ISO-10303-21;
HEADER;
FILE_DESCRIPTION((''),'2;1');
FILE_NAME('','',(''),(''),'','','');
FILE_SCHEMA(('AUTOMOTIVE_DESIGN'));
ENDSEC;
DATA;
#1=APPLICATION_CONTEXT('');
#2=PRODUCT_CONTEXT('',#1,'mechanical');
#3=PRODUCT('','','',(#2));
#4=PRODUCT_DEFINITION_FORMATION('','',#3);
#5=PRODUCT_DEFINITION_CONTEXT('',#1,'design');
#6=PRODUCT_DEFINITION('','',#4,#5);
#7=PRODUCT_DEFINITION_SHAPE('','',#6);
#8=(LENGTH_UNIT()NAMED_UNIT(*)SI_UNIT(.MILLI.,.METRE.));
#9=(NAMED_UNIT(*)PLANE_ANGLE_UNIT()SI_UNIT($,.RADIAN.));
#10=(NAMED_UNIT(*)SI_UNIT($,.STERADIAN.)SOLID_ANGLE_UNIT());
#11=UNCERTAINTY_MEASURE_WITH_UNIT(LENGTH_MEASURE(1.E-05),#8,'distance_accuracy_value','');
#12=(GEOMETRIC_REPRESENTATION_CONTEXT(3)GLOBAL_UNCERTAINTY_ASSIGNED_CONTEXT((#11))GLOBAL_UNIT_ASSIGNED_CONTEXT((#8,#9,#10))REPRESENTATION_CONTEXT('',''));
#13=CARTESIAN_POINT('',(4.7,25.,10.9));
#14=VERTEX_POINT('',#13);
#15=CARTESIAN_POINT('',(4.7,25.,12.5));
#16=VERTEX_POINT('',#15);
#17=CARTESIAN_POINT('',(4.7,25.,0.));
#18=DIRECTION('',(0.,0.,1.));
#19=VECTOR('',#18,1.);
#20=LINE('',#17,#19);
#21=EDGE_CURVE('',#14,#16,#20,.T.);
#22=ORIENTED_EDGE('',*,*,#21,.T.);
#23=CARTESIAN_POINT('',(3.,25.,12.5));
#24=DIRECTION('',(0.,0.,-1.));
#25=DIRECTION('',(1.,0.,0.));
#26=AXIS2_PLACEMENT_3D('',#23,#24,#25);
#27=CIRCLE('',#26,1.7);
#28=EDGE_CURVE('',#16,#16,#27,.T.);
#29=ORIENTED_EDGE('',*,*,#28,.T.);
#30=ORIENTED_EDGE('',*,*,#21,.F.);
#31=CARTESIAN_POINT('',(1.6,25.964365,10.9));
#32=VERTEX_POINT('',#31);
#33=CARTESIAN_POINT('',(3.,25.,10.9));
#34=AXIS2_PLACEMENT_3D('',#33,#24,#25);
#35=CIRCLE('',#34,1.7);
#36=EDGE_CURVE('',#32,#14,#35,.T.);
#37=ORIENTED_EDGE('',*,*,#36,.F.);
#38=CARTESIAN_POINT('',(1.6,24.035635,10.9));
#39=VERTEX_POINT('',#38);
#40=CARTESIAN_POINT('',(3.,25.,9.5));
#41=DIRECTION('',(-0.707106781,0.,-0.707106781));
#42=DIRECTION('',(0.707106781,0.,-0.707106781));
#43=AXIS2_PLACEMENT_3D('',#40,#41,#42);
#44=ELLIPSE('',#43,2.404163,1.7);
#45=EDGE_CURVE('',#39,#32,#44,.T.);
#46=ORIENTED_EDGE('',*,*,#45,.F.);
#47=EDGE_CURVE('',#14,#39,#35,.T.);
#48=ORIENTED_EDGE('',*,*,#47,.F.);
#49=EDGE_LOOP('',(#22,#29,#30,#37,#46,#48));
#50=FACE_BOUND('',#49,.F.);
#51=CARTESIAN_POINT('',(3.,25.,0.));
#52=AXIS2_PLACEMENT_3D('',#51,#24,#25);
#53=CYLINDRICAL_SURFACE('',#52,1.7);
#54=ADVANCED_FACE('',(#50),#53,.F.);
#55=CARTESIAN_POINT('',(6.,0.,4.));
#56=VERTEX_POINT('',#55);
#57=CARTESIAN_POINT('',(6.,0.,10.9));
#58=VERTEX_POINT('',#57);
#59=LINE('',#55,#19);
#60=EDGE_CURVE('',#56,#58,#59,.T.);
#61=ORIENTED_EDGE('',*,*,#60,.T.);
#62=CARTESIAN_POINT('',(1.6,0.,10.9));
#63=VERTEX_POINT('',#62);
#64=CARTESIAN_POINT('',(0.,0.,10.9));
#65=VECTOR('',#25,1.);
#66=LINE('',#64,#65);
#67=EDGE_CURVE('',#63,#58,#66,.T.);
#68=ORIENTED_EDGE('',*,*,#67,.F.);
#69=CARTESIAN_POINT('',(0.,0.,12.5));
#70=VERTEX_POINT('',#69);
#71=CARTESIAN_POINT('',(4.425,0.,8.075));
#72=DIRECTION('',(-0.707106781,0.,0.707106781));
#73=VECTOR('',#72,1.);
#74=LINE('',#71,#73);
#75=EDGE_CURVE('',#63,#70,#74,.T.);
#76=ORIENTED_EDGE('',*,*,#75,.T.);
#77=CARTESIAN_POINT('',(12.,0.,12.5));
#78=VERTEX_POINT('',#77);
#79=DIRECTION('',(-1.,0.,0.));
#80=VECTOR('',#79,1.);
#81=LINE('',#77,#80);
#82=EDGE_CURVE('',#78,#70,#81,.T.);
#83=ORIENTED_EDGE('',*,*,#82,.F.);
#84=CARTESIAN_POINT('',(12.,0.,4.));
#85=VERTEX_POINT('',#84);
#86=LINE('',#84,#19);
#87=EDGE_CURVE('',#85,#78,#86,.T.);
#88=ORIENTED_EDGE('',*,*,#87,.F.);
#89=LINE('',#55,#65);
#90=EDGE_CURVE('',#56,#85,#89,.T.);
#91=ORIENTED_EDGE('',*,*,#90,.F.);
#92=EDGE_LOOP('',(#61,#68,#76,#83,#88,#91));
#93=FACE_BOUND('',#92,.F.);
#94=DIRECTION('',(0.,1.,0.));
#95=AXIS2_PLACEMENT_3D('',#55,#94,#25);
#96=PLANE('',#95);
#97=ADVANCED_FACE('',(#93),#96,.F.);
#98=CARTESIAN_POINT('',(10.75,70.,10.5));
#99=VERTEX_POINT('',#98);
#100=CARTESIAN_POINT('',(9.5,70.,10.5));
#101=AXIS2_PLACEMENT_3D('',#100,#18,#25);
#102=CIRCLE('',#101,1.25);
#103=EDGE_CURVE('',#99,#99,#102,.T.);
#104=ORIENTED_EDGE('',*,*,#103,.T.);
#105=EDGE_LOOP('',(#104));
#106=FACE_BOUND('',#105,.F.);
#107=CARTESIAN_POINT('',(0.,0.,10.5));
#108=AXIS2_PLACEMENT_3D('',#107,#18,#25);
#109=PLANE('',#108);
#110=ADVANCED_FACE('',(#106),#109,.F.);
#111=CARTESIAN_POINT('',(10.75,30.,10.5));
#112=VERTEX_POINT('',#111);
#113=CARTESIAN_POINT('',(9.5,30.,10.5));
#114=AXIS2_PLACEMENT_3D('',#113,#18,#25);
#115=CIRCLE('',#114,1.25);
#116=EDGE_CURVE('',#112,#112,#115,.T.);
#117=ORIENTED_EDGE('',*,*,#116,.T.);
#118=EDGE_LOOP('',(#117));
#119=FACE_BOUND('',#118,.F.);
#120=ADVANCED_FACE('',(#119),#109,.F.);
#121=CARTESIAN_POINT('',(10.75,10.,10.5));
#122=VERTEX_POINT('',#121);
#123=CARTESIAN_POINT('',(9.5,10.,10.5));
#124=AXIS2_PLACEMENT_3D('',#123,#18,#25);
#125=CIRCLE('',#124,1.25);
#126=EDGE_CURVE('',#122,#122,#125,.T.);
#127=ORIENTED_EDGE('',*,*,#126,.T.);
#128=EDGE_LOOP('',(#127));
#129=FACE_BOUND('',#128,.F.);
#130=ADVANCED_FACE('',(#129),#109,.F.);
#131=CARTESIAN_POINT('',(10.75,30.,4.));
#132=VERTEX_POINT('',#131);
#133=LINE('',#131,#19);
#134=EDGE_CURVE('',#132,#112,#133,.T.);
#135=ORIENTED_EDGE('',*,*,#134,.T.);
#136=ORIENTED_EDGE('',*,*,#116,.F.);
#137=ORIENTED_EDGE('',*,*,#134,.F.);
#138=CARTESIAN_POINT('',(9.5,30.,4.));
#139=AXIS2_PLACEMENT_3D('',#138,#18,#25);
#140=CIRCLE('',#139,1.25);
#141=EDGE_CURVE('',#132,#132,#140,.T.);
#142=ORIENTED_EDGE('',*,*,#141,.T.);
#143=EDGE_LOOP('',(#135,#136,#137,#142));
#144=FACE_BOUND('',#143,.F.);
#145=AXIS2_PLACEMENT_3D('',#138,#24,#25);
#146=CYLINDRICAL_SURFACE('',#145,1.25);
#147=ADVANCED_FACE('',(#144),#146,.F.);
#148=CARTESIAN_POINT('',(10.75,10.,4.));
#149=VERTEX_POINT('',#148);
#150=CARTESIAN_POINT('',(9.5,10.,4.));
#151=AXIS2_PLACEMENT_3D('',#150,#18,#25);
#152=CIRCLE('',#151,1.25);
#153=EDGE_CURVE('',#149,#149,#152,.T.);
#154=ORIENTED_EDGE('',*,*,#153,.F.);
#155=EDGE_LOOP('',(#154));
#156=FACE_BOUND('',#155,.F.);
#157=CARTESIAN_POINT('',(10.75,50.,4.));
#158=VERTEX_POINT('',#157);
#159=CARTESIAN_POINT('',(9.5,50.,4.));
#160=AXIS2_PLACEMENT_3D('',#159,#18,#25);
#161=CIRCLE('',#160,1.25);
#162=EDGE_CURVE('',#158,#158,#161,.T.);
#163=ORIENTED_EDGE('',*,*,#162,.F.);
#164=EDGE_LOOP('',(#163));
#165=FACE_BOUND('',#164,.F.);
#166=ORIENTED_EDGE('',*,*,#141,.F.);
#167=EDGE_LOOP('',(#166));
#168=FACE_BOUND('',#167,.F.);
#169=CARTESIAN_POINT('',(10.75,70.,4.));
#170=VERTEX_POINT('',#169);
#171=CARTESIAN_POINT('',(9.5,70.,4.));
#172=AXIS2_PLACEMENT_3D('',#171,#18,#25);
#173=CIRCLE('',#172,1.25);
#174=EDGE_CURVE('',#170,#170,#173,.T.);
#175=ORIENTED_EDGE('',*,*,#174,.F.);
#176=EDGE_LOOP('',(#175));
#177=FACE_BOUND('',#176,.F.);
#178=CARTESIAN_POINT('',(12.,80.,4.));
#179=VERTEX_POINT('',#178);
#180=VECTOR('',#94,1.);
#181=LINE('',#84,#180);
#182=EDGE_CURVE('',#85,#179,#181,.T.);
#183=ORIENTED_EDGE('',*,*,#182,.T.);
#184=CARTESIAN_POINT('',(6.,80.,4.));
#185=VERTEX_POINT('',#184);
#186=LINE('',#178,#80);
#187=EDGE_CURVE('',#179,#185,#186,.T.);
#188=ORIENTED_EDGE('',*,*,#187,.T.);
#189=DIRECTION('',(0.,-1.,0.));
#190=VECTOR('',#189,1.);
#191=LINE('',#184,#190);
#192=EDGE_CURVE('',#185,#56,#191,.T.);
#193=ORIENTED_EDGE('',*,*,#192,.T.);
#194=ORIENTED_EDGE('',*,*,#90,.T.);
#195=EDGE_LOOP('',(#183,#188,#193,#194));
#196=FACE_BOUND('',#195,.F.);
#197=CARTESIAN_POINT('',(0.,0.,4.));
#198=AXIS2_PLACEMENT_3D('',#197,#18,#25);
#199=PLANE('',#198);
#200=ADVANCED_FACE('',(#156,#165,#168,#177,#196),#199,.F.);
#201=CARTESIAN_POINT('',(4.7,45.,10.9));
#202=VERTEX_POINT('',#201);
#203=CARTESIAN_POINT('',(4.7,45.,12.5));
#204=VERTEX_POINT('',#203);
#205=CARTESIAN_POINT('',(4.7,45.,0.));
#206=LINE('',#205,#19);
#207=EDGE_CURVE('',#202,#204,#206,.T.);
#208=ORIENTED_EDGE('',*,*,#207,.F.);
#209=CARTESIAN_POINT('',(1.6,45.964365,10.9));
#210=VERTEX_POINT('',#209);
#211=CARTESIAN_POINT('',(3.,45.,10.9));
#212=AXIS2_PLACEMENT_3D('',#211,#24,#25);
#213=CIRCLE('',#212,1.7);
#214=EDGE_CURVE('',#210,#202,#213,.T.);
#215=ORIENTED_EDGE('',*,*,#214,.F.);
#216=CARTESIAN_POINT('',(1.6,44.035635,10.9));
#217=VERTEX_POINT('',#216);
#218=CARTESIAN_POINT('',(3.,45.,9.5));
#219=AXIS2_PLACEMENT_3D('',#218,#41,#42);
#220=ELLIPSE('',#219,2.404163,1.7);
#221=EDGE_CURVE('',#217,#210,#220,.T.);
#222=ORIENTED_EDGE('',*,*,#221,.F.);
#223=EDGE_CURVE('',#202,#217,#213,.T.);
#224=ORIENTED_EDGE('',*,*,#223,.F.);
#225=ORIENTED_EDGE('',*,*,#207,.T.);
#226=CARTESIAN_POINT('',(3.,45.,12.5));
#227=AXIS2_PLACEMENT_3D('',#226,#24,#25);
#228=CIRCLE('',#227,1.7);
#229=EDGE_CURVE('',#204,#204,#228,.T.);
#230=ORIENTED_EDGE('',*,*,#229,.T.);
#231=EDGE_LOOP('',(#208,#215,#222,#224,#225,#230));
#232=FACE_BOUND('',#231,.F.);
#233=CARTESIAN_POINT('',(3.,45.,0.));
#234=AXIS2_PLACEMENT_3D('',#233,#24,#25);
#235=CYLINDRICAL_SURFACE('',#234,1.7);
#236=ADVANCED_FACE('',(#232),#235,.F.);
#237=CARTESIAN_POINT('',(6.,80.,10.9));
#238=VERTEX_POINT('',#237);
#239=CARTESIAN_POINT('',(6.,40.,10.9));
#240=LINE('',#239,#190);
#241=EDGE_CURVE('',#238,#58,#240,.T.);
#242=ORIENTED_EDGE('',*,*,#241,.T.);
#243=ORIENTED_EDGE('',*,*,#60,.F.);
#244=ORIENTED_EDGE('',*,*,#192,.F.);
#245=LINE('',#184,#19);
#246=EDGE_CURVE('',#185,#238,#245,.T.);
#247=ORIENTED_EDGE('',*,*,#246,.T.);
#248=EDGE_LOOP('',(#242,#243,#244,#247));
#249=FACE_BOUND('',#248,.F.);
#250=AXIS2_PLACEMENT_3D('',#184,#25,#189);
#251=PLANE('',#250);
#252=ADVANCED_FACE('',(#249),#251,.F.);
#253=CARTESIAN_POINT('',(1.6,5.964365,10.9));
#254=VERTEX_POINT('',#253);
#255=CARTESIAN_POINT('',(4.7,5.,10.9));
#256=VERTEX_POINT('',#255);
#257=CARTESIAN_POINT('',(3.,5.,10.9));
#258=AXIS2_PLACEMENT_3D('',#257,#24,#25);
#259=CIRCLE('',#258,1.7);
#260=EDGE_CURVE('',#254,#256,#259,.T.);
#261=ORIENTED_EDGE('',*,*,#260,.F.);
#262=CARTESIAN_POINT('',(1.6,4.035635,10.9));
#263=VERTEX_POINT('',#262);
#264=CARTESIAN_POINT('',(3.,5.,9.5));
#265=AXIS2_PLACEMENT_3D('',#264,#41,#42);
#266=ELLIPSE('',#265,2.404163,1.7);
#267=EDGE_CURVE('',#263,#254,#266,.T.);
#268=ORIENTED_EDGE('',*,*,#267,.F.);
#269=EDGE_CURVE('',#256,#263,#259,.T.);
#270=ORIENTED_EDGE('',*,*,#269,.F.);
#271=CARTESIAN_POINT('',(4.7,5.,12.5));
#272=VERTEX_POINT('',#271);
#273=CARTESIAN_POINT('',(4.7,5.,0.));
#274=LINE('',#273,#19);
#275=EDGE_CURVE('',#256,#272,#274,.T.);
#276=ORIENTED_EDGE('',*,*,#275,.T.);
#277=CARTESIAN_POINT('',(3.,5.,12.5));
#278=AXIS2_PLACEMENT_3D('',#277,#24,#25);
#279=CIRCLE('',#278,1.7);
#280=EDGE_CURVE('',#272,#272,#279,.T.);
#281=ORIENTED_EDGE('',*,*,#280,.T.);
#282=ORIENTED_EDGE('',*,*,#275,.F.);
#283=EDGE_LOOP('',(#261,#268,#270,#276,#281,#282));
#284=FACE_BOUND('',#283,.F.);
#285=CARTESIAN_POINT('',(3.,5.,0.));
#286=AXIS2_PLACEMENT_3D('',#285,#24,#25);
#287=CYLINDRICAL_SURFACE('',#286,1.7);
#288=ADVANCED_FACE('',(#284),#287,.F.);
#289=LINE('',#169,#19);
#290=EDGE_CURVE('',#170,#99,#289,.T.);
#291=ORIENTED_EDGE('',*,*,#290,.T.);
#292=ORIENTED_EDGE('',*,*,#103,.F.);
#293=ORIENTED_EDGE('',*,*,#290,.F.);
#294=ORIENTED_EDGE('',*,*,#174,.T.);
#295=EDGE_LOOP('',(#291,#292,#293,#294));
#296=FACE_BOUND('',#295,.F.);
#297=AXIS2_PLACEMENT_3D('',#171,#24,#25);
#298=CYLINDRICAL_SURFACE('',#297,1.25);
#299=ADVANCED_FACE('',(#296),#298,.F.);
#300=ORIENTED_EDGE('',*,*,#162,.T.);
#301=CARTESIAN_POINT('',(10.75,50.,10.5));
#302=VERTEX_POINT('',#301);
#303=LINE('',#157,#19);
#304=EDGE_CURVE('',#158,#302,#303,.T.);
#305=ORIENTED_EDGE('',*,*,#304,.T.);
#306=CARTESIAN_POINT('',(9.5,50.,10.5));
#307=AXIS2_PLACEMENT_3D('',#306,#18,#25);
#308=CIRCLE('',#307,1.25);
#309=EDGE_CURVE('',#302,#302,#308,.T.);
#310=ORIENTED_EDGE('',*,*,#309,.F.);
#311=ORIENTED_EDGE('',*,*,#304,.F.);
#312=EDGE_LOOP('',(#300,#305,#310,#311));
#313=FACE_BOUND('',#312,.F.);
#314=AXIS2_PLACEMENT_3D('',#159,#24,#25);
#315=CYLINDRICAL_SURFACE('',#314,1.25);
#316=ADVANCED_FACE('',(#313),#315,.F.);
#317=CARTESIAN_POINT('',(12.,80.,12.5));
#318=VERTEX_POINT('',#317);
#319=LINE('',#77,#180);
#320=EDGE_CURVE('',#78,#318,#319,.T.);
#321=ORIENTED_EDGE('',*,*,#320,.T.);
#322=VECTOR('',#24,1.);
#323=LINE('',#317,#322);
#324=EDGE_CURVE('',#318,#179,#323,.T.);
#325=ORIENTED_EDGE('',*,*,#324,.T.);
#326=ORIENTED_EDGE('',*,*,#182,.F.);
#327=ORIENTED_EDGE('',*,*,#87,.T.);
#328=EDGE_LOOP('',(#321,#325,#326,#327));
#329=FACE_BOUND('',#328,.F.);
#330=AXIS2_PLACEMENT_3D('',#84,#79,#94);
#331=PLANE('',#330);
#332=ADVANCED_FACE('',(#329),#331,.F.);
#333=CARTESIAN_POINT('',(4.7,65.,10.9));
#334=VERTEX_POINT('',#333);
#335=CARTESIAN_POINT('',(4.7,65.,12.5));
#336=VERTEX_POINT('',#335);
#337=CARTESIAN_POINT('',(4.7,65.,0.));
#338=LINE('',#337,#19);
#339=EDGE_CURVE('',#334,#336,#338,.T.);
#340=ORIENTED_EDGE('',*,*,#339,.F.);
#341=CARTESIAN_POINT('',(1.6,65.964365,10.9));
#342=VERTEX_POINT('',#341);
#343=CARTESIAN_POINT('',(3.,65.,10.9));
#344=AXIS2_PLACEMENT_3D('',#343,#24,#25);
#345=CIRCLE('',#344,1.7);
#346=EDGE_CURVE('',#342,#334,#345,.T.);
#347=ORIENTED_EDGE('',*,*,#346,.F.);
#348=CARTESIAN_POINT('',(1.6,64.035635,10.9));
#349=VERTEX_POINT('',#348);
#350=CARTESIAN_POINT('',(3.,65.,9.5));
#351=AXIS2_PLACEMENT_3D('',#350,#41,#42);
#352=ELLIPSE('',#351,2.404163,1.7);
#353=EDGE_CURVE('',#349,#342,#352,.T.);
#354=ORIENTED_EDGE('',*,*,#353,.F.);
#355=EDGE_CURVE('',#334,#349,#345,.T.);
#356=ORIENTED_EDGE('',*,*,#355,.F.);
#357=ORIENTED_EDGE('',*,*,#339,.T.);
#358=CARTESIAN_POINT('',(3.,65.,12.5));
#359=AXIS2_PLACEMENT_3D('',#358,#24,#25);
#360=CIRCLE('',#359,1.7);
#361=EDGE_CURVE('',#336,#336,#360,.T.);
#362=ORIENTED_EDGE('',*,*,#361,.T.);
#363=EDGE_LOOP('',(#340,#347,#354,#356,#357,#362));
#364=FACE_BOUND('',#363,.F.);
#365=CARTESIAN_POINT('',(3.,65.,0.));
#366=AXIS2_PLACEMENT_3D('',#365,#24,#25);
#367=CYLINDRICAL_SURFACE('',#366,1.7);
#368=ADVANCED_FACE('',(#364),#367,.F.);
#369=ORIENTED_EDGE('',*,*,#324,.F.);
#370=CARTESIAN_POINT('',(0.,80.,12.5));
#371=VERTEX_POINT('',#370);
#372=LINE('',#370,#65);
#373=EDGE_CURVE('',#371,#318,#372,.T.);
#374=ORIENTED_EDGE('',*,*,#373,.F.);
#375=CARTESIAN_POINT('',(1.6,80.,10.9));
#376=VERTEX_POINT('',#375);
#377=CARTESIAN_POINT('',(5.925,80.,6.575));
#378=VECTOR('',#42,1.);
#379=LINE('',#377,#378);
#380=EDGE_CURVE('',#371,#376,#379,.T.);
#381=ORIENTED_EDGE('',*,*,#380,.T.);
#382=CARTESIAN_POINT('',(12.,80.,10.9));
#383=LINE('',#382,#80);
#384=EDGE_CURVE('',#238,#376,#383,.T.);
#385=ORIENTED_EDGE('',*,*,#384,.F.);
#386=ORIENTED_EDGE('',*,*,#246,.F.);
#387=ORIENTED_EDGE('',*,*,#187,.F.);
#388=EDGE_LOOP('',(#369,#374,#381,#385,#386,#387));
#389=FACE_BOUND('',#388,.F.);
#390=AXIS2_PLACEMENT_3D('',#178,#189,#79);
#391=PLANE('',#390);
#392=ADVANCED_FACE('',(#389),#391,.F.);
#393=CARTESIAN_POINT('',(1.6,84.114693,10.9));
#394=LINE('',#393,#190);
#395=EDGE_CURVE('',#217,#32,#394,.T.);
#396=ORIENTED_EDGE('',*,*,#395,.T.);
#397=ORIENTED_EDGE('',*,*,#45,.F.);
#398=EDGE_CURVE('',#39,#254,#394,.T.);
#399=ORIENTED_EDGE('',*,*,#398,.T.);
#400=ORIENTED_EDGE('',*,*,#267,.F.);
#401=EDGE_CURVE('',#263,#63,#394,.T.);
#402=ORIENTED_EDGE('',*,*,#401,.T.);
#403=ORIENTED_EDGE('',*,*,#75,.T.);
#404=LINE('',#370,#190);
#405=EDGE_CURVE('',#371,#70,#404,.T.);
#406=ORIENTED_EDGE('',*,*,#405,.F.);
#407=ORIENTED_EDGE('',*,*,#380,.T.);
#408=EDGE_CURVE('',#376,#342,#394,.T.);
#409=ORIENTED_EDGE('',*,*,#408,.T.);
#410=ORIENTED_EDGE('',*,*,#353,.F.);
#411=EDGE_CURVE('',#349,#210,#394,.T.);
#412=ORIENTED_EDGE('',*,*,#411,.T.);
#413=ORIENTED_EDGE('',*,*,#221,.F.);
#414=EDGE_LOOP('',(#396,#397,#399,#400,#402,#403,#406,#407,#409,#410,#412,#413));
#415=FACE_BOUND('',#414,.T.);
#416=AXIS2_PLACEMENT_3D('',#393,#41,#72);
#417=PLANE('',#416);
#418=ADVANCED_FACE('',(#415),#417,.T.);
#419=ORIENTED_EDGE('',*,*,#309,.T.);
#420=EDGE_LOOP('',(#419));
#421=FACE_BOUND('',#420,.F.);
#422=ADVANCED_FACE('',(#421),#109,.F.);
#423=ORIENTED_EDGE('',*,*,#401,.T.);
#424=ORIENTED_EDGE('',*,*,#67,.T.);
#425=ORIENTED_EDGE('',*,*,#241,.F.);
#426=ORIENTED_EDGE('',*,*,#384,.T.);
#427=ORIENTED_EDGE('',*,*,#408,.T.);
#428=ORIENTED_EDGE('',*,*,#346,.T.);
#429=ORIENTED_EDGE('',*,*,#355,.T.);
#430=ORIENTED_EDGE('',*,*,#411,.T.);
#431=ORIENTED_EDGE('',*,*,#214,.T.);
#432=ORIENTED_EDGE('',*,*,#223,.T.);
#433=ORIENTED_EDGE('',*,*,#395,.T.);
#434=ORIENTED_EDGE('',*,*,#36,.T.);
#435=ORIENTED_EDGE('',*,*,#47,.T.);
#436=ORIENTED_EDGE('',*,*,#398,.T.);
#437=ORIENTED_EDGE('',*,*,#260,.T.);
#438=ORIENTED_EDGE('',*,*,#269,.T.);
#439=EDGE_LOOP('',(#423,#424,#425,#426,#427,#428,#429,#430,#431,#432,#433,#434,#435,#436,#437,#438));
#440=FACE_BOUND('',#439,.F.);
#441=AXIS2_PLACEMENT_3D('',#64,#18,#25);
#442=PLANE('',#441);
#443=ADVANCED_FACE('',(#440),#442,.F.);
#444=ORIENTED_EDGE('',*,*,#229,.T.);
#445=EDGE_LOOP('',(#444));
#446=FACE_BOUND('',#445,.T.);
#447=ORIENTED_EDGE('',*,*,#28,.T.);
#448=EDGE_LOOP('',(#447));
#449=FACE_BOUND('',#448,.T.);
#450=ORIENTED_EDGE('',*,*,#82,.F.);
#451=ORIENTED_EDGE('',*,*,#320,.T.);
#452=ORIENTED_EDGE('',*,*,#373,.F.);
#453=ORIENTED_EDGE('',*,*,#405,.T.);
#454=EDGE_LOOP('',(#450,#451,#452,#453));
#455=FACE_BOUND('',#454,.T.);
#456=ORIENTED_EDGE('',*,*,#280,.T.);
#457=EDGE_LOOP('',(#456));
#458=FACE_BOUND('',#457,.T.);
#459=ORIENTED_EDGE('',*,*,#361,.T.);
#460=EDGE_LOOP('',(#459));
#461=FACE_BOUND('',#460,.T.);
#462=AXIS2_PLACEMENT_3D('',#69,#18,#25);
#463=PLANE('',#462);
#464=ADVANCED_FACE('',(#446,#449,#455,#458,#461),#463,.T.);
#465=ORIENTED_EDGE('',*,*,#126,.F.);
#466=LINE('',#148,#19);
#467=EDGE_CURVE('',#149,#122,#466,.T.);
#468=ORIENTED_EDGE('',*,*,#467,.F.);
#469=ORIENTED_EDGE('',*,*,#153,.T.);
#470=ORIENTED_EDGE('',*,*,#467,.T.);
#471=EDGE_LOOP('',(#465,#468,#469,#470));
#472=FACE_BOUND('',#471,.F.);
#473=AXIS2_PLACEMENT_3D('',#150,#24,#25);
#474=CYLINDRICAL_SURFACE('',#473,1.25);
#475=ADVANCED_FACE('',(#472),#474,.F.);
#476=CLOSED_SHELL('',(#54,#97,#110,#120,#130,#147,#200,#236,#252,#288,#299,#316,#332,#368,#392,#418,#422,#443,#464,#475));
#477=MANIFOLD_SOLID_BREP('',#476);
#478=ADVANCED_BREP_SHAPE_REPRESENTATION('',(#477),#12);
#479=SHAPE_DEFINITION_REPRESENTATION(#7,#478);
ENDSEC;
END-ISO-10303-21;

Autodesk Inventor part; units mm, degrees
ref_plane "Left_Connecting_Web_StartPlane" through (0, 0, 4) normal (0, 0, 1) x (1, 0, 0)
sketch "Left_Connecting_Web_Profile" plane through (0, 0, 4) normal (0, 0, 1) x (1, 0, 0)
  line L0 (6, 0) -> (12, 0)
  line L1 (12, 0) -> (12, 80)
  line L2 (12, 80) -> (6, 80)
  line L3 (6, 80) -> (6, 0)
  point P0 (0, 0)
  dimension "d1" = 6
  dimension "d2" = 6
  dimension "d3" = 80
extrude "Left_Connecting_Web" add sketch "Left_Connecting_Web_Profile" along normal blind 8.5
ref_plane "Left_Rod_Contact_Flange_StartPlane" through (0, 0, 10.9) normal (0, 0, 1) x (1, 0, 0)
sketch "Left_Rod_Contact_Flange_Profile" plane through (0, 0, 10.9) normal (0, 0, 1) x (1, 0, 0)
  line L0 (0, 0) -> (12, 0)
  line L1 (12, 0) -> (12, 80)
  line L2 (12, 80) -> (0, 80)
  line L3 (0, 80) -> (0, 0)
  dimension "d7" = 12
  dimension "d8" = 80
extrude "Left_Rod_Contact_Flange" add sketch "Left_Rod_Contact_Flange_Profile" along normal blind 1.6
sketch "Original_Rod_Clearance_4x_Locations" plane through (0, 0, 0) normal (0, 0, 1) x (1, 0, 0)
  circle A0 centre (3, 5) radius 1.7
  circle A1 centre (3, 25) radius 1.7
  circle A2 centre (3, 45) radius 1.7
  circle A3 centre (3, 65) radius 1.7
  point P0 (0, 0)
  dimension "d11" = 3
  dimension "d12" = 5
  dimension "d13" = 3.4
  dimension "d14" = 3
  dimension "d15" = 25
  dimension "d16" = 3.4
  dimension "d17" = 3
  dimension "d18" = 45
  dimension "d19" = 3.4
  dimension "d20" = 3
  dimension "d21" = 65
  dimension "d22" = 3.4
extrude "Original_Rod_Clearance_4x" cut sketch "Original_Rod_Clearance_4x_Locations" along normal through all
ref_plane "Work Plane3" through (0, 0, 4) normal (0, 0, 1) x (1, 0, 0)
sketch "Deck_Assembly_M3_Locations" plane through (0, 0, 4) normal (0, 0, 1) x (1, 0, 0)
  circle A0 centre (9.5, 10) radius 1.25
  circle A1 centre (9.5, 30) radius 1.25
  circle A2 centre (9.5, 50) radius 1.25
  circle A3 centre (9.5, 70) radius 1.25
  point P0 (0, 0)
  dimension "d26" = 9.5
  dimension "d27" = 10
  dimension "d28" = 2.5
  dimension "d29" = 9.5
  dimension "d30" = 30
  dimension "d31" = 2.5
  dimension "d32" = 9.5
  dimension "d33" = 50
  dimension "d34" = 2.5
  dimension "d35" = 9.5
  dimension "d36" = 70
  dimension "d37" = 2.5
extrude "Four_Blind_M3_Tap_Bores" cut sketch "Deck_Assembly_M3_Locations" along normal blind 6.5
thread "Deck_M3x0_5_6H_1" size "M3x0.5" class "6H" standard "ISO Metric profile" length 6.5
thread "Deck_M3x0_5_6H_2" size "M3x0.5" class "6H" standard "ISO Metric profile" length 6.5
thread "Deck_M3x0_5_6H_3" size "M3x0.5" class "6H" standard "ISO Metric profile" length 6.5
thread "Deck_M3x0_5_6H_4" size "M3x0.5" class "6H" standard "ISO Metric profile" length 6.5
chamfer "Outer_End_1p6mm_45deg" distance 1.6 angle 45 1 edges at (0, 40, 10.9)
equation "\"d1\" = RodWidth"
equation "\"d2\" = WebThickness"
equation "\"d3\" = ContactLength"
equation "\"d4\" = DropHeight"
equation "\"d7\" = RodWidth + WebThickness"
equation "\"d8\" = ContactLength"
equation "\"d9\" = RodFlangeThickness"
equation "\"d11\" = 0.5 * RodWidth"
equation "\"d12\" = RodHoleStart + 0 * RodScrewPitch"
equation "\"d13\" = RodClearanceDiameter"
equation "\"d14\" = 0.5 * RodWidth"
equation "\"d15\" = RodHoleStart + RodScrewPitch"
equation "\"d16\" = RodClearanceDiameter"
equation "\"d17\" = 0.5 * RodWidth"
equation "\"d18\" = RodHoleStart + 2 * RodScrewPitch"
equation "\"d19\" = RodClearanceDiameter"
equation "\"d20\" = 0.5 * RodWidth"
equation "\"d21\" = RodHoleStart + 3 * RodScrewPitch"
equation "\"d22\" = RodClearanceDiameter"
equation "\"d26\" = JoinLeftX"
equation "\"d27\" = JoinFirstY + 0 * JoinPitch"
equation "\"d28\" = TapDrillDiameter"
equation "\"d29\" = JoinLeftX"
equation "\"d30\" = JoinFirstY + JoinPitch"
equation "\"d31\" = TapDrillDiameter"
equation "\"d32\" = JoinLeftX"
equation "\"d33\" = JoinFirstY + 2 * JoinPitch"
equation "\"d34\" = TapDrillDiameter"
equation "\"d35\" = JoinLeftX"
equation "\"d36\" = JoinFirstY + 3 * JoinPitch"
equation "\"d37\" = TapDrillDiameter"
equation "\"d38\" = JoinThreadDepth"
equation "\"d40\" = JoinThreadDepth"
equation "\"d42\" = JoinThreadDepth"
equation "\"d44\" = JoinThreadDepth"
equation "\"d46\" = JoinThreadDepth"
equation "\"d48\" = OuterEndChamfer"
equation "\"d49\" = OuterEndChamfer"
equation "\"OverallWidth\" = 51"
equation "\"RodWidth\" = 6"
equation "\"ContactLength\" = 80"
equation "\"BaseThickness\" = 4"
equation "\"DropHeight\" = 8.5"
equation "\"WebThickness\" = 6"
equation "\"FingerStartX\" = 19.93338"
equation "\"FingerWidth\" = 13.5"
equation "\"FingerThickness\" = 6"
equation "\"FingerEndInset\" = 4"
equation "\"RodClearanceDiameter\" = 3.4"
equation "\"ClampFirstY\" = 41.82802"
equation "\"ClampPitch\" = 16"
equation "\"ClampHeight\" = BaseThickness + 0.5 * FingerThickness"
equation "\"TapDrillDiameter\" = 2.5"
equation "\"TapDepth\" = 6"
equation "\"RodHoleStart\" = 5"
equation "\"RodScrewPitch\" = 20"
equation "\"JoinLeftX\" = 9.5"
equation "\"JoinFirstY\" = 10"
equation "\"JoinPitch\" = 20"
equation "\"JoinThreadDepth\" = 6.5"
equation "\"JoinCountersinkDiameter\" = 6.2"
equation "\"d0\" = BaseThickness"
equation "\"d6\" = BaseThickness + DropHeight - RodFlangeThickness"
equation "\"d25\" = BaseThickness"
equation "\"RodFlangeThickness\" = 1.6"
equation "\"OuterEndChamfer\" = RodFlangeThickness"
properties part number "Left_Rod_Support"
